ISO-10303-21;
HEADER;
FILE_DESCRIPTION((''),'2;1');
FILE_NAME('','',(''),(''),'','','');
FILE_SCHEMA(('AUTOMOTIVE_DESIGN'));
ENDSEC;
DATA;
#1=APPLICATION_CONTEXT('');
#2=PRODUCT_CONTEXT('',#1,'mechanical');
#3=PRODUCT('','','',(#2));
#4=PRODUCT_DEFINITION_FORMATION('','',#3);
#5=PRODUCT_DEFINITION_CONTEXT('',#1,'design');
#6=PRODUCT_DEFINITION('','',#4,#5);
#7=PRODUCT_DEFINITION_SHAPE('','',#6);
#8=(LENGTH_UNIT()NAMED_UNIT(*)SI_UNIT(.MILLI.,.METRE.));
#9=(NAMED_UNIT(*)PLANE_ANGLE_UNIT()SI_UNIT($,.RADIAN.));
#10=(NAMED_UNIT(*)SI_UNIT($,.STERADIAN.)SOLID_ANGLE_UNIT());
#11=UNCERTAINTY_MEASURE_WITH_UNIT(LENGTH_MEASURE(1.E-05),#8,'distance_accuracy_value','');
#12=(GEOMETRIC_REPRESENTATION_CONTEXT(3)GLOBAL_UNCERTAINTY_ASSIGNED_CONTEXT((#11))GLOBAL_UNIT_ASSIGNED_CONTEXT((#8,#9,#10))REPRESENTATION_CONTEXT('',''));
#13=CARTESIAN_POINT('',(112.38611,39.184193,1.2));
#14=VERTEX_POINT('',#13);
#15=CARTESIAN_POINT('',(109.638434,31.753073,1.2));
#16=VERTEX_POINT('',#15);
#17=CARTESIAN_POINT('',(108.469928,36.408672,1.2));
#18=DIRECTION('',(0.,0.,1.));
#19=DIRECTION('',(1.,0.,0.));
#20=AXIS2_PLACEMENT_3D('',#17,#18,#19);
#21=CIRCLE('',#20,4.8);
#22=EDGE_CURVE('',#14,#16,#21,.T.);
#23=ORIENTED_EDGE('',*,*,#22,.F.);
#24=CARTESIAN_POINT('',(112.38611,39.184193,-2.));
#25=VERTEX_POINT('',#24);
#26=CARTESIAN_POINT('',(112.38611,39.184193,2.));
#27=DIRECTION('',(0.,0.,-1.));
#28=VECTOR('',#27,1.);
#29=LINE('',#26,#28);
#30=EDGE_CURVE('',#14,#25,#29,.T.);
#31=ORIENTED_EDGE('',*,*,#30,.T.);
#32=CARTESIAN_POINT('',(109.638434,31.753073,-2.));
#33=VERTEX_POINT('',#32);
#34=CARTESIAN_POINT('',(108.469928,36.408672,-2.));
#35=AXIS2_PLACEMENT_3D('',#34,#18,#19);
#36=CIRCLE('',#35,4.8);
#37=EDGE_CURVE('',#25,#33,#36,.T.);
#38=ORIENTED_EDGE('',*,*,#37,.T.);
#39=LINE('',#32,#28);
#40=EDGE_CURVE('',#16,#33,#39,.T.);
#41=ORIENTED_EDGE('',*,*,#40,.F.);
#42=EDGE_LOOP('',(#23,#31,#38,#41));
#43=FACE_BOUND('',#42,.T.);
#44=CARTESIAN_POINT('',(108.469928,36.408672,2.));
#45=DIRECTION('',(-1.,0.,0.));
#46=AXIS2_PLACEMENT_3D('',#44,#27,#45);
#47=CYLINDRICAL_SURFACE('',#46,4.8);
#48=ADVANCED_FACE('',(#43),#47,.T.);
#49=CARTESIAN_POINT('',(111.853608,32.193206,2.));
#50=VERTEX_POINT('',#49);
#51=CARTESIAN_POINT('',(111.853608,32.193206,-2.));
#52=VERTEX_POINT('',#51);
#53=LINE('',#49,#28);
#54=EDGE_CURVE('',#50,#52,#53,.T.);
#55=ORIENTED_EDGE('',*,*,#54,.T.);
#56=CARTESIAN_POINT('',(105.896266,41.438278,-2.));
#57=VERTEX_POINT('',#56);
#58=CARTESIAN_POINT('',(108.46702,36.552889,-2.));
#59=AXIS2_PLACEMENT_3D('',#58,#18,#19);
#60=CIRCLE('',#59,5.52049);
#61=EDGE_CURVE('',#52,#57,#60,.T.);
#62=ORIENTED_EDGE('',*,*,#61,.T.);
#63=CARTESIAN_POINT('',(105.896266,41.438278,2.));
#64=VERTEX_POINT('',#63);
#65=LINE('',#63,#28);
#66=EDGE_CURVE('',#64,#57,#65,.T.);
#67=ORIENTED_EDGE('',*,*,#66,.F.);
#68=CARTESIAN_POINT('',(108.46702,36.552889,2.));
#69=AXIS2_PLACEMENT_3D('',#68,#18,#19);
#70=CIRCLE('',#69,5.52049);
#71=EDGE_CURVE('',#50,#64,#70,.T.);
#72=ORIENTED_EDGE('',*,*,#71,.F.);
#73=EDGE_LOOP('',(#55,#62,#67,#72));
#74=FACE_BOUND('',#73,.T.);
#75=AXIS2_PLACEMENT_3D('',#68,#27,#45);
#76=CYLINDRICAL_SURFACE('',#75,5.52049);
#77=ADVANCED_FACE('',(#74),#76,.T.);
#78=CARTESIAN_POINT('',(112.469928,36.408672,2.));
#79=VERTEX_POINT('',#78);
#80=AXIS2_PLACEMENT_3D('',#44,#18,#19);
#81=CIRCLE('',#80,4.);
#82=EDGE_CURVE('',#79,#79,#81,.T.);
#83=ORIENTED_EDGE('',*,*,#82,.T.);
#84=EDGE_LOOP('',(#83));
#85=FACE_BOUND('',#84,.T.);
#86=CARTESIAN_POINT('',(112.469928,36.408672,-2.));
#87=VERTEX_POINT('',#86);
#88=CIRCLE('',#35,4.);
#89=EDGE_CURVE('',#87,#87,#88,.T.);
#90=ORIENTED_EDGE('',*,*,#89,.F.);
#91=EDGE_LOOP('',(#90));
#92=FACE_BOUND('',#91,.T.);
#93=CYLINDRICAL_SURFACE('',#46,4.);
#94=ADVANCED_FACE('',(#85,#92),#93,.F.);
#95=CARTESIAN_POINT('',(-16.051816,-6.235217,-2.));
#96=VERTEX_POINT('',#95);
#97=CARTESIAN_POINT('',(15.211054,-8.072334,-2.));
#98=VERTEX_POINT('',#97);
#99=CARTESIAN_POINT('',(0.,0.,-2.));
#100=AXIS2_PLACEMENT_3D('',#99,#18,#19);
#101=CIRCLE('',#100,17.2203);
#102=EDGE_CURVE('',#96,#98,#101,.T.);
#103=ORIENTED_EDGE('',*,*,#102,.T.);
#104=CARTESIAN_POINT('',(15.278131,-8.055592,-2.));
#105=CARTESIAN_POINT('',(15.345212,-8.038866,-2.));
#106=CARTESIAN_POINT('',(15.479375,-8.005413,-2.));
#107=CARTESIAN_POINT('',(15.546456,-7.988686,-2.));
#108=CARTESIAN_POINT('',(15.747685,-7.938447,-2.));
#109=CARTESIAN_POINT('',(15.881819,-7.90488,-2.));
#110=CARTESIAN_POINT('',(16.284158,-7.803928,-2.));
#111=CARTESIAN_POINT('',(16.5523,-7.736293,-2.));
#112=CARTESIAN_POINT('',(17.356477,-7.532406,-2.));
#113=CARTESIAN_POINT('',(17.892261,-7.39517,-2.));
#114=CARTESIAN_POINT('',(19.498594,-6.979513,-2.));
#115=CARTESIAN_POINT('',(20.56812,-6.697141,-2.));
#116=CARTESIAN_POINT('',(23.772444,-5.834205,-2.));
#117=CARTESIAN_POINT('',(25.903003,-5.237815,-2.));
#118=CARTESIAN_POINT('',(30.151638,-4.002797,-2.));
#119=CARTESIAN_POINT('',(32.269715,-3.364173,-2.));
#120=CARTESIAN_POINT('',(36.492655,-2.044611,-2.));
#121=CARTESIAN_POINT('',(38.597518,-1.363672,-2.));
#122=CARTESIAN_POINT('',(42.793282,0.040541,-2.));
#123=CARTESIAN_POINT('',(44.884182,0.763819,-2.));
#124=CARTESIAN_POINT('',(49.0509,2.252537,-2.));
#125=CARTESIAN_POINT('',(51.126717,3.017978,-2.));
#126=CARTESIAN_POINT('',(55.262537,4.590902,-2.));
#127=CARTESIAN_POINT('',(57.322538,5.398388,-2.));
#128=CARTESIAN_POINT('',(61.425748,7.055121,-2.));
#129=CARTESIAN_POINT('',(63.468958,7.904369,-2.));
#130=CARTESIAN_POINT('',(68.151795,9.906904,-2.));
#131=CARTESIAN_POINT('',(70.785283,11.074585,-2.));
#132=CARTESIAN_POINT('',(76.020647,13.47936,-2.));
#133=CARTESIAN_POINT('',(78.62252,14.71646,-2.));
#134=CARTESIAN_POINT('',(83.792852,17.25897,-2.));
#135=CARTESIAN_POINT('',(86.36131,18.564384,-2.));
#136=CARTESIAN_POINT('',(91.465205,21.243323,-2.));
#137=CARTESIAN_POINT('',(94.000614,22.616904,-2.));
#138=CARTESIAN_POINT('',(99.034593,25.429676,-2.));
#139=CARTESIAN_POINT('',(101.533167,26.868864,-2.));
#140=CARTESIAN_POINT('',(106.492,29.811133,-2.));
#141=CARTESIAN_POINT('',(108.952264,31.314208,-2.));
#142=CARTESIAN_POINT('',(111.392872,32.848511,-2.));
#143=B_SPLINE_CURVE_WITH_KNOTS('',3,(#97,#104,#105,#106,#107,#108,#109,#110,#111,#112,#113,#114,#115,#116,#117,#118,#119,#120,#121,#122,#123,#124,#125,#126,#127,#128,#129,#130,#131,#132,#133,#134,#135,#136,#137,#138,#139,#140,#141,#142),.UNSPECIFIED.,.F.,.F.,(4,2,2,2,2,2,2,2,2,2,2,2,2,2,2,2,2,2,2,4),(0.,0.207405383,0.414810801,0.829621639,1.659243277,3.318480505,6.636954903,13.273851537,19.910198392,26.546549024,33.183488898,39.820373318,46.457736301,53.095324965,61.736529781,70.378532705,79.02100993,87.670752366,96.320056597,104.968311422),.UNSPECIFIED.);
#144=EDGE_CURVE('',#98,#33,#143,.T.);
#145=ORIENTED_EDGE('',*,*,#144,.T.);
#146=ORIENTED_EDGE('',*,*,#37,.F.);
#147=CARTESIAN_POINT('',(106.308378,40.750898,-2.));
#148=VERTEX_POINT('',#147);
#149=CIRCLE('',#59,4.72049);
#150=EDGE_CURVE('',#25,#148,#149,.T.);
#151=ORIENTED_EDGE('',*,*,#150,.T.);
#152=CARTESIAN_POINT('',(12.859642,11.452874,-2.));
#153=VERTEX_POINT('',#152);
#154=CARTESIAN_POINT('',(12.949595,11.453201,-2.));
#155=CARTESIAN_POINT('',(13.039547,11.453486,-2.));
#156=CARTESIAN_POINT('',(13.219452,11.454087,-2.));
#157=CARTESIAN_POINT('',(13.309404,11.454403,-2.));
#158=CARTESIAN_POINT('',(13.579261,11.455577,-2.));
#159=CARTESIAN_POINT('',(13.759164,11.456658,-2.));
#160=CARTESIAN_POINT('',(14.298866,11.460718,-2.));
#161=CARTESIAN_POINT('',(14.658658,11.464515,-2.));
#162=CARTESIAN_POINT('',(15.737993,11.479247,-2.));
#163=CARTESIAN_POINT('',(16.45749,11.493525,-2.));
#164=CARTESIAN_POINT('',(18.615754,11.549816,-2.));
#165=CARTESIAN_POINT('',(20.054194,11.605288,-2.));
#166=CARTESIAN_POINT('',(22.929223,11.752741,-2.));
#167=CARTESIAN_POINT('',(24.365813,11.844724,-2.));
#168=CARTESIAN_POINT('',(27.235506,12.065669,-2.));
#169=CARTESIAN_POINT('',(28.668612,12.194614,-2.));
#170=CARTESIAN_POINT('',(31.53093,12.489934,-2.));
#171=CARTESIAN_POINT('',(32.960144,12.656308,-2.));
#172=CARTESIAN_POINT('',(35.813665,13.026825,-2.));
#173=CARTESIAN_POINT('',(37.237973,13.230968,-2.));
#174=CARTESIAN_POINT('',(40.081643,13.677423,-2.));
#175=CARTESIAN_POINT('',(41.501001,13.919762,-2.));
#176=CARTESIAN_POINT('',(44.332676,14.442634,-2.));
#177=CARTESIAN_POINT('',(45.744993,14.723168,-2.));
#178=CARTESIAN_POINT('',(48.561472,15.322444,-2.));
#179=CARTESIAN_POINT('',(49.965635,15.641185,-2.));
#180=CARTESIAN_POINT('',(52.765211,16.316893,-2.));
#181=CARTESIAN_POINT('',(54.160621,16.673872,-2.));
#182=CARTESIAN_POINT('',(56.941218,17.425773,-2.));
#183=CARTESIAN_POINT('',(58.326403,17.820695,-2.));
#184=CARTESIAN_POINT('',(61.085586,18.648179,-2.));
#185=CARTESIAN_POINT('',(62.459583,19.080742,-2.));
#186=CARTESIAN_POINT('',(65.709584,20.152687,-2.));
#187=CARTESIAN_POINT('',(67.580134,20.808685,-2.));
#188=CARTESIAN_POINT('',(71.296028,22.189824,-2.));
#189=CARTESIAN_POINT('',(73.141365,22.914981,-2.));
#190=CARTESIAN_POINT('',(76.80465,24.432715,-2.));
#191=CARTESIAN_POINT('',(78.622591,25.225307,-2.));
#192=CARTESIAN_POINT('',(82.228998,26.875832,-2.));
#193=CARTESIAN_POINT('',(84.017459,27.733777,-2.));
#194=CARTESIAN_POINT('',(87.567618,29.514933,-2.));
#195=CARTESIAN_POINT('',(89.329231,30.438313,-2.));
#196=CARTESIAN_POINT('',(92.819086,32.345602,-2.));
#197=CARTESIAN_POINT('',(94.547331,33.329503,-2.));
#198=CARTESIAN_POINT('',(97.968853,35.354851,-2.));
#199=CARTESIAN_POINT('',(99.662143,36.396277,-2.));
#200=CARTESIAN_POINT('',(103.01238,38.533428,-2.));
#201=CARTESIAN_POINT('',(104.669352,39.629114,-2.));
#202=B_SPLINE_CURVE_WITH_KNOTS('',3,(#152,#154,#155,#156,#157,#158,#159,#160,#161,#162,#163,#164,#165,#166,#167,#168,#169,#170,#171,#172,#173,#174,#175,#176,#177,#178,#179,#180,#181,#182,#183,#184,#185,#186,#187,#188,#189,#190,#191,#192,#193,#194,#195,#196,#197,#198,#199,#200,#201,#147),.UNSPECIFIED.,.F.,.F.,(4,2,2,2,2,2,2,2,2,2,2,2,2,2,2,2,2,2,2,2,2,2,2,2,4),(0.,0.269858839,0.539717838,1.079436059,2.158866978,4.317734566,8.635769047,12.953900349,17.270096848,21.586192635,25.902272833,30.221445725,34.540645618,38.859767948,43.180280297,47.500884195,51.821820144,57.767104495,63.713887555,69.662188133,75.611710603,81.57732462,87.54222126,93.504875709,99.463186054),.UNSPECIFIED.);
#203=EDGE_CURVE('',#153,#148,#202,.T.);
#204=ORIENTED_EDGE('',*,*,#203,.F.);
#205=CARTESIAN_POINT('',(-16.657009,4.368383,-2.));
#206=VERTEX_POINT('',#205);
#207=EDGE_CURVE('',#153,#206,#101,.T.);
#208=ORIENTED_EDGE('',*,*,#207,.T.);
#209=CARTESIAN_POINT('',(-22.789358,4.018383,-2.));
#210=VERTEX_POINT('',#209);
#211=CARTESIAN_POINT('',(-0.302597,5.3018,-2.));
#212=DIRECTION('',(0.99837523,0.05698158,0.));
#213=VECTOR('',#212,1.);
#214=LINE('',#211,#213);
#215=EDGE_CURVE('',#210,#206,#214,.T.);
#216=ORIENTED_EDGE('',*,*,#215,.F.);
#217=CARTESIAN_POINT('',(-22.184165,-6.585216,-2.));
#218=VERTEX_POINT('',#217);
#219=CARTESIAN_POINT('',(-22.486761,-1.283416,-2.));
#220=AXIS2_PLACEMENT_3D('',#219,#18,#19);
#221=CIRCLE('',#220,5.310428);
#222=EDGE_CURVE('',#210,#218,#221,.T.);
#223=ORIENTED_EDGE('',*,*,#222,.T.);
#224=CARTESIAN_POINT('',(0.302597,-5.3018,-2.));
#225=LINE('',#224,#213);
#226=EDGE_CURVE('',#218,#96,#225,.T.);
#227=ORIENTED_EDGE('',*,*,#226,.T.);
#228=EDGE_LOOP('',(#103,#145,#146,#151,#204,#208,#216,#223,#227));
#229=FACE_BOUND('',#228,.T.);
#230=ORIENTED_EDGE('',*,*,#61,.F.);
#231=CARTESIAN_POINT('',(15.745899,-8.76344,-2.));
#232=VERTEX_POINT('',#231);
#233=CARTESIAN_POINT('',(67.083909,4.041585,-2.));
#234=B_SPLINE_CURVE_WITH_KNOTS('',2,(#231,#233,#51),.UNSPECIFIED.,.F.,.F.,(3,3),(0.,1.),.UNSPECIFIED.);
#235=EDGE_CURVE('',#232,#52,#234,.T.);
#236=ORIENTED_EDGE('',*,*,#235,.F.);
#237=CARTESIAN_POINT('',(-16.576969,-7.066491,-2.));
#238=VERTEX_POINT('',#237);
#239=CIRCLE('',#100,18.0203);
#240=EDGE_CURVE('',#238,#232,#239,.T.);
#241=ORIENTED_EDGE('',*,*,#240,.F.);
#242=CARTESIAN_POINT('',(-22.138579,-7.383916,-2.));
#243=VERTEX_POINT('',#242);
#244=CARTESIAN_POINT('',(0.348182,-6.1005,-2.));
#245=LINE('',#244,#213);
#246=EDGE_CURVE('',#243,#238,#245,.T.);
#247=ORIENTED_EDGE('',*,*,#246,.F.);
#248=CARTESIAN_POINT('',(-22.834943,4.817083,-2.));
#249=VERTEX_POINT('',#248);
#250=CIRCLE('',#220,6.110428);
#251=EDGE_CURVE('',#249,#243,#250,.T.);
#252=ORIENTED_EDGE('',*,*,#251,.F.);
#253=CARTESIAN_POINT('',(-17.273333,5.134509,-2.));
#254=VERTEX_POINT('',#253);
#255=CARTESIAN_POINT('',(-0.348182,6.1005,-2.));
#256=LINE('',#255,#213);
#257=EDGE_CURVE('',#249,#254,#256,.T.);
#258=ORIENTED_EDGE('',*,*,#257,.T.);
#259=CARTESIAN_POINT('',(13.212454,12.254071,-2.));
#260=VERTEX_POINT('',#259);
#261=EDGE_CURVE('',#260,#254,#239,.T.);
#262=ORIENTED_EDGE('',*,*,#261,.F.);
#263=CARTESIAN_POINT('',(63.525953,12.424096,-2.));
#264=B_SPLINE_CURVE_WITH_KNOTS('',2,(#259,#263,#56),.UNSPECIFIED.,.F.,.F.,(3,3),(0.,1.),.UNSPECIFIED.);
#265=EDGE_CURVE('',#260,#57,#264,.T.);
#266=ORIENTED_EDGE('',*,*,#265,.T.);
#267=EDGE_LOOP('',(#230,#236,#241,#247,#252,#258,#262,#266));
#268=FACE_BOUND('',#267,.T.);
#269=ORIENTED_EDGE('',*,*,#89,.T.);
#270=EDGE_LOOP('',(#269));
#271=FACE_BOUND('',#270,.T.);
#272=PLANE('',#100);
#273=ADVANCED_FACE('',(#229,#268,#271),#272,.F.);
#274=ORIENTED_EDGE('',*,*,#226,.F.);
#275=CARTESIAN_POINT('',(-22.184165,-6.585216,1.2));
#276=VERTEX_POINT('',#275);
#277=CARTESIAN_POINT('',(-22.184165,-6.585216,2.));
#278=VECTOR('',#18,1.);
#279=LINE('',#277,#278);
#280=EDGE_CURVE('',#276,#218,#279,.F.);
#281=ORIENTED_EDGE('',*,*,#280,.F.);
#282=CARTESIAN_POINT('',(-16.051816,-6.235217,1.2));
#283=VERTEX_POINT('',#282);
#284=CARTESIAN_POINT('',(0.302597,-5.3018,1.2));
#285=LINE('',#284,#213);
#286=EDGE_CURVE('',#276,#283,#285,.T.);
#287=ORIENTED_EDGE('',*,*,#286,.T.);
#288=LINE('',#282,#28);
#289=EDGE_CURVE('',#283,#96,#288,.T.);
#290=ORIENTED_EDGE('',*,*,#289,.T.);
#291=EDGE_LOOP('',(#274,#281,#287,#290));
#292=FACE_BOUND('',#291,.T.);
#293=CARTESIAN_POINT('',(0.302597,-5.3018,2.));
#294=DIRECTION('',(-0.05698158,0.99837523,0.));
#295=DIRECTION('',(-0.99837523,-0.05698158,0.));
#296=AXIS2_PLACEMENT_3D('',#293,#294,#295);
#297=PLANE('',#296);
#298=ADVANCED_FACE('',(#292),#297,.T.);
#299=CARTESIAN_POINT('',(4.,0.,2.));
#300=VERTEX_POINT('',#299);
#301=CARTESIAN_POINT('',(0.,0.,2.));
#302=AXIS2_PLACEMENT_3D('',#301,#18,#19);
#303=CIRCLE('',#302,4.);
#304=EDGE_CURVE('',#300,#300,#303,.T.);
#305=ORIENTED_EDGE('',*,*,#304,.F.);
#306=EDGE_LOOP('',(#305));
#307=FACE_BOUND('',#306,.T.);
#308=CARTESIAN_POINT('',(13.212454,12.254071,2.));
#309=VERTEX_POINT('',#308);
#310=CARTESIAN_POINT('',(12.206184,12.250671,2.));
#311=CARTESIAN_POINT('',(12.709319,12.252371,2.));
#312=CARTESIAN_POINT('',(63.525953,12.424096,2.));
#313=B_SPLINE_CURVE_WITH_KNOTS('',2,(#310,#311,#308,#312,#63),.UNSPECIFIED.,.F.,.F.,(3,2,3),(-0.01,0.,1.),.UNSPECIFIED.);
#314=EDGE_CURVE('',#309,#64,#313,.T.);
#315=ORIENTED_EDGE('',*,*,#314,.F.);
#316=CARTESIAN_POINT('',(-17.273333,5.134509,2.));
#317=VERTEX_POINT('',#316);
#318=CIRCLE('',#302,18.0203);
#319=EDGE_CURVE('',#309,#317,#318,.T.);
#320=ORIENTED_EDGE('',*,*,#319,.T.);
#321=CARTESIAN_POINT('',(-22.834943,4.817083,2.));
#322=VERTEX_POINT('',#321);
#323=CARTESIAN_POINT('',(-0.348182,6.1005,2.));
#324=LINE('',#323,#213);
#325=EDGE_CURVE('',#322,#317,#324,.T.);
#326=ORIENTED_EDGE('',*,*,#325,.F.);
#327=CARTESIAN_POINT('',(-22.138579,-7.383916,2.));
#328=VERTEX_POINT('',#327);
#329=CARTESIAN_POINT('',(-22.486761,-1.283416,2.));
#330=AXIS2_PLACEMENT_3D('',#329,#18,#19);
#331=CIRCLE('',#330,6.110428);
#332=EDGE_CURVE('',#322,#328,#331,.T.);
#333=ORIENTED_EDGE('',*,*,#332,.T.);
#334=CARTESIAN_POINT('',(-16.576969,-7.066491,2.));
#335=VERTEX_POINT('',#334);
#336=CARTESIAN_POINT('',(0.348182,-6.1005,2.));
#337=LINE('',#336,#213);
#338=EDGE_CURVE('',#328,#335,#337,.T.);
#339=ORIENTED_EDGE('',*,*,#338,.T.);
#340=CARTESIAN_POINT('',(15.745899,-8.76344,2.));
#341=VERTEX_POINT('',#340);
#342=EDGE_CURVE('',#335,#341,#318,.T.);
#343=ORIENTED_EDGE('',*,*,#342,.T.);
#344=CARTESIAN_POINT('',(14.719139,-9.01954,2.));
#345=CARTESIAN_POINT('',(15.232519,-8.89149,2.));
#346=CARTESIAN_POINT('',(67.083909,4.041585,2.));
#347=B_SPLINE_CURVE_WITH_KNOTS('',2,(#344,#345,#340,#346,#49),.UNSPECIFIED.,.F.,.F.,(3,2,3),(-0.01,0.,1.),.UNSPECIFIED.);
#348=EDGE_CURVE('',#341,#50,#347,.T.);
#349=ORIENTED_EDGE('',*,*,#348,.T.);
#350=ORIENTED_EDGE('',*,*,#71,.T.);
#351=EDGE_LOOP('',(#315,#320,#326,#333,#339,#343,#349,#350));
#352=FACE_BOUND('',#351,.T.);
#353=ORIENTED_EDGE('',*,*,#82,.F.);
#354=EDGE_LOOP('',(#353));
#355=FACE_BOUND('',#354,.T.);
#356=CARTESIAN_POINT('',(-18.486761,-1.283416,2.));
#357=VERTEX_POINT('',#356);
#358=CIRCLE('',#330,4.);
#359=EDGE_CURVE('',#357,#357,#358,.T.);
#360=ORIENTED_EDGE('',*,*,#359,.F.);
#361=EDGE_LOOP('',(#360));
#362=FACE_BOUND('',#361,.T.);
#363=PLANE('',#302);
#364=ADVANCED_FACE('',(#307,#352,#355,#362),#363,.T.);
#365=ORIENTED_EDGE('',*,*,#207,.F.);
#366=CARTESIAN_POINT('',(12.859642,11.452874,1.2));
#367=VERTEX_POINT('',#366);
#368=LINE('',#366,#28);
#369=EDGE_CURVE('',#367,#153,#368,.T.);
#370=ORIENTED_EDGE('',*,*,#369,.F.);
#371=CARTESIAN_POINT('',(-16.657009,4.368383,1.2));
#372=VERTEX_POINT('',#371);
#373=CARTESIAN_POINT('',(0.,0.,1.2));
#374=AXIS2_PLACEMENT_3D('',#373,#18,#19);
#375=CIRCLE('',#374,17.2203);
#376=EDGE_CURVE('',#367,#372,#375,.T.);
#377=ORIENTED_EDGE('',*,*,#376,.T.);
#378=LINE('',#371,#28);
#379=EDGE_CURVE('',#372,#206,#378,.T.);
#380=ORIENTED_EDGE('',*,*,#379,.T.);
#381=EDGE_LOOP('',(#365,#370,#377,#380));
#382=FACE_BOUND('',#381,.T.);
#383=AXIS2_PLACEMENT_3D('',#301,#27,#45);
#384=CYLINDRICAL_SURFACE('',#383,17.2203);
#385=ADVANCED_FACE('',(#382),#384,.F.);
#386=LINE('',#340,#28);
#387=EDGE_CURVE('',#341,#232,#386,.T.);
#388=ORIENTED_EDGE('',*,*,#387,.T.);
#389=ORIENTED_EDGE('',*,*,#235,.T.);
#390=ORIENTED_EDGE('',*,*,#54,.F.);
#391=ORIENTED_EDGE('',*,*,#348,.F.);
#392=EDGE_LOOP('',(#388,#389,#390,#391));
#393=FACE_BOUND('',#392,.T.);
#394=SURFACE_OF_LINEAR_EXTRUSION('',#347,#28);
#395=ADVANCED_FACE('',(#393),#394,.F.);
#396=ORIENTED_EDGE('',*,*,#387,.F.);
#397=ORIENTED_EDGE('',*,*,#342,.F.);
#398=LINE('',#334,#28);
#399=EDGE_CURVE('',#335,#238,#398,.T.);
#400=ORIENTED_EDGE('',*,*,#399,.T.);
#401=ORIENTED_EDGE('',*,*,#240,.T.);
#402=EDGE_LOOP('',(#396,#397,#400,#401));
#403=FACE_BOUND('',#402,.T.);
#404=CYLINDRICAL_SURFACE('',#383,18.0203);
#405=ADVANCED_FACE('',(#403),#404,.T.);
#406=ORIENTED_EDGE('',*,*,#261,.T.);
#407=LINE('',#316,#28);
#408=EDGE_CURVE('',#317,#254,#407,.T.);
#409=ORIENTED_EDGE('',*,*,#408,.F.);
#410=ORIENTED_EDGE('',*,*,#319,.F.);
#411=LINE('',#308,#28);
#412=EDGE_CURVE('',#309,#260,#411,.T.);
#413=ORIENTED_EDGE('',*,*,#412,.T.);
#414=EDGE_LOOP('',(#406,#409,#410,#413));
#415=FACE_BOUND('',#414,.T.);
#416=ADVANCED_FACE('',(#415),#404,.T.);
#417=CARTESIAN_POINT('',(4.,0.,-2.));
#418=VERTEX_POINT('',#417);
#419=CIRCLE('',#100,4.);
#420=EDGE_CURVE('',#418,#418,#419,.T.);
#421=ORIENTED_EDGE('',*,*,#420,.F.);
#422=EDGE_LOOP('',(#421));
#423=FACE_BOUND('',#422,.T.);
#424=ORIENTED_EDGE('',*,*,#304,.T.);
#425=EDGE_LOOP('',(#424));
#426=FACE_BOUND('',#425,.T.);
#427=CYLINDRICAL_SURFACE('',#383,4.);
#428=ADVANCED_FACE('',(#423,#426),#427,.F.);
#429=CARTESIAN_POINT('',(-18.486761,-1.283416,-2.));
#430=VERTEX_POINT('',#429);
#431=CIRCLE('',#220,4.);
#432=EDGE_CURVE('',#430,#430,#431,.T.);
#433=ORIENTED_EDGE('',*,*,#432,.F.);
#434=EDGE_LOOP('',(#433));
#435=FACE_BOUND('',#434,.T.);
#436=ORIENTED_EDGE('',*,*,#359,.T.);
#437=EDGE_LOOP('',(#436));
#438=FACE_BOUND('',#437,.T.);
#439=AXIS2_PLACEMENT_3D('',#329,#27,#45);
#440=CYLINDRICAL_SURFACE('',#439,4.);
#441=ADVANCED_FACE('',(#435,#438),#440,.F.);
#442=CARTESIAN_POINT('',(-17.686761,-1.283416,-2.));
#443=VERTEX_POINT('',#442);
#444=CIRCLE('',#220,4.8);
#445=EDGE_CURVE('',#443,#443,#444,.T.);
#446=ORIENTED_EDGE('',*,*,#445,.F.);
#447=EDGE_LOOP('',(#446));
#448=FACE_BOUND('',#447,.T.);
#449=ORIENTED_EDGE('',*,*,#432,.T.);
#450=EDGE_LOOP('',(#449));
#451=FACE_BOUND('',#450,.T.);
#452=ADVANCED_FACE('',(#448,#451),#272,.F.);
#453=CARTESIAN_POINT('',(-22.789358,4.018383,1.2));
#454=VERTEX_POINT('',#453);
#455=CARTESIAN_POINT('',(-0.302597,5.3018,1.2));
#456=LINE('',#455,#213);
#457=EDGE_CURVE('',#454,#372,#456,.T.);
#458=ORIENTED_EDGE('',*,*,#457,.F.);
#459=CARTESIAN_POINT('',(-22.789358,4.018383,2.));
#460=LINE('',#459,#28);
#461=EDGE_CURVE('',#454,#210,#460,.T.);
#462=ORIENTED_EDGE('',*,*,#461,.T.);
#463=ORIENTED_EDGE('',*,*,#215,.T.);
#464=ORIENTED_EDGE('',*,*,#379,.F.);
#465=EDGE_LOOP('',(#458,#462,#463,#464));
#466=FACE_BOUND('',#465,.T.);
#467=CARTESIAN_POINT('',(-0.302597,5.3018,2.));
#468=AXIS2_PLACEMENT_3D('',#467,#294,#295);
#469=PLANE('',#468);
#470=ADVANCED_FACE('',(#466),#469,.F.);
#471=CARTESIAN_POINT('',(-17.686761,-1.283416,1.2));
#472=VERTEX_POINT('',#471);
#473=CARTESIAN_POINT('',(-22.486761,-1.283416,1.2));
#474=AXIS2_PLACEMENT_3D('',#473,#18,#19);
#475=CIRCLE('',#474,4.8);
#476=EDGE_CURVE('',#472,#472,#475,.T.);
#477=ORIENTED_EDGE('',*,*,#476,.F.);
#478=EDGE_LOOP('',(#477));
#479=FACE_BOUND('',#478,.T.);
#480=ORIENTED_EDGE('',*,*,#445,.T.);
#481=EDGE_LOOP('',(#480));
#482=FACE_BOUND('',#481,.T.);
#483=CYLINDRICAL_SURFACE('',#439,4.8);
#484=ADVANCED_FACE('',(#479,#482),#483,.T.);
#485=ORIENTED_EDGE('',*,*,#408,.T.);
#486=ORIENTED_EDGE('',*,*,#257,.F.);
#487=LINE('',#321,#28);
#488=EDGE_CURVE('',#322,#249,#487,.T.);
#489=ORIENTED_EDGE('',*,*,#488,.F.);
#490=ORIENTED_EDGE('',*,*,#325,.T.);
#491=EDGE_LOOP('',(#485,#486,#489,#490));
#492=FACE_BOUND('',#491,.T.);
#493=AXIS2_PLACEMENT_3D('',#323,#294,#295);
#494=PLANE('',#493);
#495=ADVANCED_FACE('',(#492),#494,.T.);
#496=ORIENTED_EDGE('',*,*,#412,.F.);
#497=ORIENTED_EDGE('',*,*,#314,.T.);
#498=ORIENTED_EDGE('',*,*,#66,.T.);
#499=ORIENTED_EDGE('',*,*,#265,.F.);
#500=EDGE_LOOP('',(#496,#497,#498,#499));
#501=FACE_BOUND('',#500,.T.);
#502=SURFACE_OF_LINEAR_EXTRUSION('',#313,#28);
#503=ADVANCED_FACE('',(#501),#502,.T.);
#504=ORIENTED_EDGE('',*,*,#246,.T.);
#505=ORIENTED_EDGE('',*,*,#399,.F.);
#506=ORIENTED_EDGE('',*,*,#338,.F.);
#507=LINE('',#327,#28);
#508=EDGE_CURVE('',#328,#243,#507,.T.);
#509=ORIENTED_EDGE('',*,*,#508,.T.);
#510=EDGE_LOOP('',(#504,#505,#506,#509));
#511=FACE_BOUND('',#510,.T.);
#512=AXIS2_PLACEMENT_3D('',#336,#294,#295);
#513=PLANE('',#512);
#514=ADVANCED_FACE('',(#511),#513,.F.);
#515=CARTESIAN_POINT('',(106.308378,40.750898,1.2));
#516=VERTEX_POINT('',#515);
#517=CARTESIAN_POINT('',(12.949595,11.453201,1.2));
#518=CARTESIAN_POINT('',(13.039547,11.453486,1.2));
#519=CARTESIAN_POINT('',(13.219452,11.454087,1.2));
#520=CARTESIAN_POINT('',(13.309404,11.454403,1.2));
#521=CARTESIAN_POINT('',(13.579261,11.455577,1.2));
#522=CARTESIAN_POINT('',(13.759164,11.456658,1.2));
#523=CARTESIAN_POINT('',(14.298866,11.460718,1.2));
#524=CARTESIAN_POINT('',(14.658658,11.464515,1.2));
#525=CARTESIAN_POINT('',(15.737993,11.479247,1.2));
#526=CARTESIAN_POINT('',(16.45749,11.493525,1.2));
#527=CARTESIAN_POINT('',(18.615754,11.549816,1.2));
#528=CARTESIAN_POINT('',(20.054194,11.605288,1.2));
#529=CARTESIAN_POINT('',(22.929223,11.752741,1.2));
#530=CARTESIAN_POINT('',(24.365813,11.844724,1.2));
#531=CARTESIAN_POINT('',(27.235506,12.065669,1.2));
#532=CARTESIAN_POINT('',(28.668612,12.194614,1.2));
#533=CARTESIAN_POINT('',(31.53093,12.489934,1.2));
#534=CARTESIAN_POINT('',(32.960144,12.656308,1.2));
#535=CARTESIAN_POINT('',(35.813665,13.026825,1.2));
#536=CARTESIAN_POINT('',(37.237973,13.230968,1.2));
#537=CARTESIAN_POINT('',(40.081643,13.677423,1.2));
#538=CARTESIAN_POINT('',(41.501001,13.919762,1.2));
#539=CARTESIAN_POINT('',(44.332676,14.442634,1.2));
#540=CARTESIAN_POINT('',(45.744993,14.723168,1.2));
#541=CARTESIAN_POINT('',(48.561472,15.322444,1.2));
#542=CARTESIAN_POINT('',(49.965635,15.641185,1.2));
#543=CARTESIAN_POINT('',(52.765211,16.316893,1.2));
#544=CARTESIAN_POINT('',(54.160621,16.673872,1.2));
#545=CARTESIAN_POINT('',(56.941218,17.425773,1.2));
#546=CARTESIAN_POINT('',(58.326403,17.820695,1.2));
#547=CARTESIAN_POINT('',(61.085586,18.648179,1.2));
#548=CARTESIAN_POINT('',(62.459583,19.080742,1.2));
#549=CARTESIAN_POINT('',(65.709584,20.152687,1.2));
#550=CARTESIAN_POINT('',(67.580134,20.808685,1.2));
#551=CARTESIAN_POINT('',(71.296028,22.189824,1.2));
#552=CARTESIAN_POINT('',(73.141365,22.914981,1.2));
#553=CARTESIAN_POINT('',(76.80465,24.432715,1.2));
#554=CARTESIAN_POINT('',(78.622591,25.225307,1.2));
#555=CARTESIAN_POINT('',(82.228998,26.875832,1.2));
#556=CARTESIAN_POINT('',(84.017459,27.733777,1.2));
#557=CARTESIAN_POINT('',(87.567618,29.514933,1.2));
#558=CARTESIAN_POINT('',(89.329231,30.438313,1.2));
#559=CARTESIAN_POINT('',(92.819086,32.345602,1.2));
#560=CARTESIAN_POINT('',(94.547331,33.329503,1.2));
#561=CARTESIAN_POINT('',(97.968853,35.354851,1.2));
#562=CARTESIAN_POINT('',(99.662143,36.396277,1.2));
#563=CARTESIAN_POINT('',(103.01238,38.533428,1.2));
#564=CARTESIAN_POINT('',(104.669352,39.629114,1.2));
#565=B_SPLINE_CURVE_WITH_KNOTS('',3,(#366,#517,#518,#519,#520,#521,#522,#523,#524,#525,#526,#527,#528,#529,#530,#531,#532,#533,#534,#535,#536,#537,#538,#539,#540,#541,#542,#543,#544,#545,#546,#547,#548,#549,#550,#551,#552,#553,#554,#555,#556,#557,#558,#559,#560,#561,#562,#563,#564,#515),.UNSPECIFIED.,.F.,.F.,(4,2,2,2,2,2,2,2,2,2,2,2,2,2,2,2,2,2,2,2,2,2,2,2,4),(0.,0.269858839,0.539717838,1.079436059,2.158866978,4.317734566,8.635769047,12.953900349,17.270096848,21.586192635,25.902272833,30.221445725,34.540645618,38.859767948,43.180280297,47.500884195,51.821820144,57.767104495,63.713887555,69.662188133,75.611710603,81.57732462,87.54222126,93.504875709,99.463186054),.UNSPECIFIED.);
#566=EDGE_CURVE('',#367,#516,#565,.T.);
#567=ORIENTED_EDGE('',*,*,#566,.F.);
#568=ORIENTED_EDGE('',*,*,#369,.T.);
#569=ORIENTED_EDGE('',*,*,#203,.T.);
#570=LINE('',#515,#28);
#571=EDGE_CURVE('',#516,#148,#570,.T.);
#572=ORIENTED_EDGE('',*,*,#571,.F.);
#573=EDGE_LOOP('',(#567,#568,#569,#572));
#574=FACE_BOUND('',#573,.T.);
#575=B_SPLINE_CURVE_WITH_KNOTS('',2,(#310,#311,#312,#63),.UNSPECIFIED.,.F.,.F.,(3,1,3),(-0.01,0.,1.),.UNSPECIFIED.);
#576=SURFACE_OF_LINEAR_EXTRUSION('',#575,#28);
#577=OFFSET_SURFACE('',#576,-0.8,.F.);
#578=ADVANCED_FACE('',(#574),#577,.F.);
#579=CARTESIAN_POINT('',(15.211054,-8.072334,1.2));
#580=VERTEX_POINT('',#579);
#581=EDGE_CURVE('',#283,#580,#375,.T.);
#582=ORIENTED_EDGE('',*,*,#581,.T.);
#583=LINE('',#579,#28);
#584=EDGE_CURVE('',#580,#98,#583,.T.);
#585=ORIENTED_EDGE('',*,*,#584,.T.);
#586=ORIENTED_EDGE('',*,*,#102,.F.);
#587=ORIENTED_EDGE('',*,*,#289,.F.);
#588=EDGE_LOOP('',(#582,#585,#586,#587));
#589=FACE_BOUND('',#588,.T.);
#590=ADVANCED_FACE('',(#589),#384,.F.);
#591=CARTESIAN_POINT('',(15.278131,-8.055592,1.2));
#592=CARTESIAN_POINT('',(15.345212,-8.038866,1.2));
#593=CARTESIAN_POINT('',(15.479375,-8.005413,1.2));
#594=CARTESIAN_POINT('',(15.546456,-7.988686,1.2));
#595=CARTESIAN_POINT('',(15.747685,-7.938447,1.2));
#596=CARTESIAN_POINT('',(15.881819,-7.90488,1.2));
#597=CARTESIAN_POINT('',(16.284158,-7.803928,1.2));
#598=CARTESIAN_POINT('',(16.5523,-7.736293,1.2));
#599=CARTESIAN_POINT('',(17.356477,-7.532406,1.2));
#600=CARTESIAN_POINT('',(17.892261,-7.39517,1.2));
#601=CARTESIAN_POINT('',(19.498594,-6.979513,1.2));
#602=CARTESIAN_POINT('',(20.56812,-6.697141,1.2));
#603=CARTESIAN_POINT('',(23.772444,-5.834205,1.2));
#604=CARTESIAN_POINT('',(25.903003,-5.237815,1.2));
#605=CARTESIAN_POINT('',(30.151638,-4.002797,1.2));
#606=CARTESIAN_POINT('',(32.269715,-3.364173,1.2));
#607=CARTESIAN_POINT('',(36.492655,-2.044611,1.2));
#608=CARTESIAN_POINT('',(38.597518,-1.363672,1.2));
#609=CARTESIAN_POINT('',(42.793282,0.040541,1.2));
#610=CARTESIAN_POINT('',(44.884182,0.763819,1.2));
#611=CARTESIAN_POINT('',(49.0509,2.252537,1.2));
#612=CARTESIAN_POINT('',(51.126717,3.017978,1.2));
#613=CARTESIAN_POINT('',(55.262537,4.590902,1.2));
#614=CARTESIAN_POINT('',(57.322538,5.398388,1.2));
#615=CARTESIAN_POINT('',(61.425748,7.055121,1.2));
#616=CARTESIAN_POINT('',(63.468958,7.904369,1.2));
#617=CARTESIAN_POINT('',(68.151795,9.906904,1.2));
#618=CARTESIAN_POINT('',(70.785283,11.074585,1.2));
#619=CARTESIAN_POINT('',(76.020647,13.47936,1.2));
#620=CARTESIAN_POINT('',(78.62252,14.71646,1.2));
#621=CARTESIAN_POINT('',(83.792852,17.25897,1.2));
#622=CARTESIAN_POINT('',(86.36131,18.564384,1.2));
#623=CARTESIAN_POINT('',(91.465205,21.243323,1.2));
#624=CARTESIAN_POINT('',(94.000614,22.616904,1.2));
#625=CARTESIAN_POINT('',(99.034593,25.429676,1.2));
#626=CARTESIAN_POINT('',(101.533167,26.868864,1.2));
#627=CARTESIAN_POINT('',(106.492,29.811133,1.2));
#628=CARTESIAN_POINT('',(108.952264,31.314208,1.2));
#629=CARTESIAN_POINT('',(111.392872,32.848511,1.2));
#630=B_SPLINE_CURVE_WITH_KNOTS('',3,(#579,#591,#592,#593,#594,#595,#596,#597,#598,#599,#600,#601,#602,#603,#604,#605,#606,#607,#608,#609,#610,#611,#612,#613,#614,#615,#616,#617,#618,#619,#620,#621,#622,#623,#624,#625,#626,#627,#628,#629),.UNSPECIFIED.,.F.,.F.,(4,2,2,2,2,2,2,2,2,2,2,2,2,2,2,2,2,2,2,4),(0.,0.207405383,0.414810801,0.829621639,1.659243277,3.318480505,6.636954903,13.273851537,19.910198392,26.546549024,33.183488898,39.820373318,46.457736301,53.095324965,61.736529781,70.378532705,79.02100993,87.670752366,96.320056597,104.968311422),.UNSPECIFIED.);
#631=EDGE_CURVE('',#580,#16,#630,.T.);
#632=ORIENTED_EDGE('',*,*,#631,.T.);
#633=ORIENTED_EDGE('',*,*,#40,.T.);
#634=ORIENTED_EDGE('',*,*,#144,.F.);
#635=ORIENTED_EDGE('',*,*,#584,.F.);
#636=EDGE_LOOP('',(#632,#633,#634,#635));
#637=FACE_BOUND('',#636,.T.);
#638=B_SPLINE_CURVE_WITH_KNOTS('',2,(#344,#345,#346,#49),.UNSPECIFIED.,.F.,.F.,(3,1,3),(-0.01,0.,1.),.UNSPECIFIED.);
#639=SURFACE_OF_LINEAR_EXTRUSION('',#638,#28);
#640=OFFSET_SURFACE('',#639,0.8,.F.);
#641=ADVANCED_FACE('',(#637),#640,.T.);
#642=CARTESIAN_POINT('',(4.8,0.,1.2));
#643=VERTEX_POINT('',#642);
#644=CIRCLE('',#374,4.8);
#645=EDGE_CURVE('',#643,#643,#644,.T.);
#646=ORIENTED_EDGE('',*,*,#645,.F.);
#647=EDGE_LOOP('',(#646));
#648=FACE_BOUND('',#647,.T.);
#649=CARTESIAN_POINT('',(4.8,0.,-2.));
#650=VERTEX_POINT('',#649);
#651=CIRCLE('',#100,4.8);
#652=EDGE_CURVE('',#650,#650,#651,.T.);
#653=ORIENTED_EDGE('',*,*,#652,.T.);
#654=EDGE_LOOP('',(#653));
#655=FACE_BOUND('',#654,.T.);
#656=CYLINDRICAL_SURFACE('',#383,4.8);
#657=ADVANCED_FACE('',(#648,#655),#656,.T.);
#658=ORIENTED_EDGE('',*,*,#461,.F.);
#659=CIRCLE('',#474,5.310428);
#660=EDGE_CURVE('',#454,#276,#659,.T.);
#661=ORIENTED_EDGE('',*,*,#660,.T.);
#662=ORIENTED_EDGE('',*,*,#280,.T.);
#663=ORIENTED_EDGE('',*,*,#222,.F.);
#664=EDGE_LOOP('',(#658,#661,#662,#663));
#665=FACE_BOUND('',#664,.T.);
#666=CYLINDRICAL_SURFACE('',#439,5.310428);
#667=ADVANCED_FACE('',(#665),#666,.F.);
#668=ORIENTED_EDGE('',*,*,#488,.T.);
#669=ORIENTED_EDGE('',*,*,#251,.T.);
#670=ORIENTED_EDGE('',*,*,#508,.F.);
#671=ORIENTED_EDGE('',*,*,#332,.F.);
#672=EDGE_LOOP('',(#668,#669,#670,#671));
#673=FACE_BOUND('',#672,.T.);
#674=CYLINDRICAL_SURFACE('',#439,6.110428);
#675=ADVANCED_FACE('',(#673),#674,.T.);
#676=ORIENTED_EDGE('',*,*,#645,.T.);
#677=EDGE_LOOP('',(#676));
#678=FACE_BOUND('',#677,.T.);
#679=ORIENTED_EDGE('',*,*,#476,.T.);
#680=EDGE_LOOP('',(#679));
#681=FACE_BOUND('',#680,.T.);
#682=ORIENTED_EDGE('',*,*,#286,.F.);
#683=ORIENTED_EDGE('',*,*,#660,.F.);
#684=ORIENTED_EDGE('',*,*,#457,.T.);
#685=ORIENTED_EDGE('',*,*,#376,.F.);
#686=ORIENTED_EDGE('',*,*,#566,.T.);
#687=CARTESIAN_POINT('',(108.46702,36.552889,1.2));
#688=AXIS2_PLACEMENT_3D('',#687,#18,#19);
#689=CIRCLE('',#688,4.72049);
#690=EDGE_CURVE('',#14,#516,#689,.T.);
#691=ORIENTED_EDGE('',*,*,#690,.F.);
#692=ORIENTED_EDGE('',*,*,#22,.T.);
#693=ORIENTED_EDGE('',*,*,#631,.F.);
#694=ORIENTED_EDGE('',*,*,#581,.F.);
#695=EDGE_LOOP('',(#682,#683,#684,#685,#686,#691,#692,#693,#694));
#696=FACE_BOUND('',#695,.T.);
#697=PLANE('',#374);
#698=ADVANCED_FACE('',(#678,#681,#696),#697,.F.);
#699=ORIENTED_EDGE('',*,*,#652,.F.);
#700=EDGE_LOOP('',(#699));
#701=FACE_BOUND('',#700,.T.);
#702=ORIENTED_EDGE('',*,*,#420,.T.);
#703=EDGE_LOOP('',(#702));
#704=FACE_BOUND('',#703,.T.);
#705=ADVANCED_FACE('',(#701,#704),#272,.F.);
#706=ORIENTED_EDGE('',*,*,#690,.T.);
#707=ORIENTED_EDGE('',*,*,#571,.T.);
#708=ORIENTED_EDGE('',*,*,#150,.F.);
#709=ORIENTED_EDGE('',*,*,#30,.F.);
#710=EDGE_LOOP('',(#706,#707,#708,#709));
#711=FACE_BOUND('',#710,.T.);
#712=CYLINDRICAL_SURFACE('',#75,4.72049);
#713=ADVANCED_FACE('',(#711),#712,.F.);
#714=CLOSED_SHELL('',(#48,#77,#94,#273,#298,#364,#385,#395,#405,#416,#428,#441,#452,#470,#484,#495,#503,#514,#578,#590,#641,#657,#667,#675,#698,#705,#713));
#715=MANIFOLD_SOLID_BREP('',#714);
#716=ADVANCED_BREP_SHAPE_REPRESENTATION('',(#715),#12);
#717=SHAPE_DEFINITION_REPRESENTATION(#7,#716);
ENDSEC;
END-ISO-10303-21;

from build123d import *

# Parameters (mm, degrees)
SKETCH1_R           = 4
BOSS_EXTRUDE1_DEPTH = 2
SHELL1_START        = -2
SHELL1_OUTLINE_R    = 4.8
SHELL1_DEPTH        = 3.2


# Read off the part's stored shape, not the designer's step: Shell1
with BuildPart() as part:
    # Sketch1 → Boss-Extrude1 (new, symmetric)
    with BuildSketch(Plane.XY):
        with BuildLine():
            Line((-17.273333042, 5.134508518), (-22.834943086, 4.817083449))
            ThreePointArc((-22.834943086, 4.817083449), (-28.587261134, -1.63159827), (-22.138579415, -7.383916318))
            Line((-22.138579415, -7.383916318), (-16.576969371, -7.066491249))
            ThreePointArc((-16.576969371, -7.066491249), (-0.944763396, -17.995517059), (15.7458991, -8.7634396))
            add(Edge.make_bspline(
                [(15.7458991, -8.7634396), (67.083909385, 4.041585312), (111.853607553, 32.193205755)],
                knots=[0, 0, 0, 1, 1, 1], degree=2))
            ThreePointArc((111.853607553, 32.193205755), (113.10751986, 39.543134952), (105.896265572, 41.438277917))
            add(Edge.make_bspline(
                [(105.896265572, 41.438277917), (63.525953211, 12.424095607), (13.212454281, 12.254071322)],
                knots=[0.987896241, 0.987896241, 0.987896241, 1.987896241, 1.987896241, 1.987896241], degree=2))
            ThreePointArc((13.212454281, 12.254071322), (-4.098137102, 17.548119112), (-17.273333042, 5.134508518))
        make_face()
        with Locations((-22.486761251, -1.283416434)):
            Circle(SKETCH1_R, mode=Mode.SUBTRACT)
        Circle(SKETCH1_R, mode=Mode.SUBTRACT)
        with Locations((108.469927907, 36.408671583)):
            Circle(SKETCH1_R, mode=Mode.SUBTRACT)
    extrude(amount=BOSS_EXTRUDE1_DEPTH, both=True)

    # Shell1 outline → Shell1 (cut)
    with BuildSketch(Plane.XY.offset(SHELL1_START)):
        with BuildLine():
            ThreePointArc((-16.051816298, -6.235216567), (-1.010183418, -17.190644594), (15.211053739, -8.072334002))
            add(Edge.make_bspline(
                [(15.211053739, -8.072334002), (15.222385933, -8.06950746), (15.233718127, -8.066680918), (15.245050322, -8.063854377), (15.256382516, -8.061027835), (15.26771471, -8.058201293), (15.279046904, -8.055374751), (15.290379098, -8.05254821), (15.301711293, -8.049721668), (15.313043487, -8.046895126), (15.324375681, -8.044068584), (15.354121011, -8.036649331), (15.372534147, -8.03205662), (15.390947283, -8.027463909), (15.409360418, -8.022871197), (15.427773554, -8.018278486), (15.44618669, -8.013685775), (15.464599826, -8.009093063), (15.483012962, -8.004500352), (15.501426097, -7.999907641), (15.519839233, -7.995314929), (15.540554011, -7.990148129), (15.542858699, -7.989573289), (15.545136117, -7.989005183), (15.547530208, -7.988408212), (15.549617399, -7.987887312), (15.552237019, -7.987234194), (15.554249413, -7.98673216), (15.556693958, -7.986122386), (15.558944951, -7.985560901), (15.5612476, -7.984986493), (15.56583998, -7.983840868), (15.568136163, -7.983268038), (15.570432338, -7.982695192), (15.572728507, -7.982122328), (15.575024668, -7.981549448), (15.577320821, -7.980976551), (15.579616968, -7.980403637), (15.581913107, -7.979830706), (15.584209239, -7.979257758), (15.586505364, -7.978684793), (15.593393716, -7.976965848), (15.597985921, -7.975819817), (15.602578098, -7.974673718), (15.607170246, -7.973527552), (15.611762364, -7.972381317), (15.616354454, -7.971235016), (15.620946514, -7.970088646), (15.625538546, -7.968942209), (15.630130548, -7.967795704), (15.634722521, -7.966649131), (15.648498354, -7.96320921), (15.657682126, -7.960915659), (15.666865782, -7.958621837), (15.676049322, -7.956327744), (15.685232745, -7.954033381), (15.694416052, -7.951738746), (15.703599244, -7.949443841), (15.712782318, -7.947148666), (15.721965277, -7.944853219), (15.731148119, -7.942557502), (15.77706175, -7.931077562), (15.813790795, -7.921889279), (15.85051798, -7.912696664), (15.887243306, -7.903499717), (15.923966772, -7.894298439), (15.960688378, -7.885092829), (15.997408124, -7.875882887), (16.034126012, -7.866668613), (16.070842039, -7.857450008), (16.107556207, -7.848227071), (16.291117748, -7.802090727), (16.437937227, -7.765112345), (16.584726952, -7.728064656), (16.731486924, -7.690947659), (16.878217144, -7.653761355), (17.02491761, -7.616505744), (17.171588325, -7.579180826), (17.318229287, -7.5417866), (17.464840497, -7.504323068), (17.611421956, -7.466790228), (18.05107708, -7.353983788), (18.34406149, -7.278502266), (18.636926899, -7.202743515), (18.929673307, -7.126707537), (19.222300717, -7.050394331), (19.514809132, -6.973803896), (19.807198553, -6.896936234), (20.099468984, -6.819791344), (20.391620426, -6.742369227), (20.683652882, -6.664669882), (21.559393298, -6.430740165), (22.142744307, -6.273678112), (22.725619399, -6.11550715), (23.308018593, -5.956227279), (23.889941907, -5.795838499), (24.471389362, -5.63434081), (25.052360976, -5.471734213), (25.632856767, -5.308018707), (26.212876755, -5.143194292), (26.792420958, -4.977260969), (28.529626269, -4.476134272), (29.68586008, -4.137614183), (30.84019098, -3.794658457), (31.992619122, -3.447267078), (33.143144661, -3.095440033), (34.29176775, -2.739177308), (35.438488542, -2.378478888), (36.583307191, -2.01334476), (37.726223851, -1.64377491), (38.867238673, -1.269769323), (42.284578093, -0.134445311), (44.55519768, 0.640180196), (46.818211791, 1.432548876), (49.073621643, 2.242661072), (51.32142845, 3.070517125), (53.561633431, 3.916117378), (55.794237801, 4.779462172), (58.019242777, 5.660551849), (60.236649574, 6.559386751), (62.44645941, 7.47596722), (68.878655155, 10.20493448), (73.080612538, 12.065048094), (77.254554243, 13.99063813), (81.400488497, 15.981708647), (85.518423161, 18.038264067), (89.608365726, 20.16030918), (93.67032332, 22.347849143), (97.704302702, 24.600889477), (101.710310261, 26.919436071), (105.688352025, 29.30349518), (109.638433649, 31.753073424)],
                knots=[-0.003323428, -0.003323428, -0.003323428, -0.003323428, -0.003323428, -0.003323428, -0.003323428, -0.003323428, -0.003323428, -0.003323428, -0.003323428, -0.003323428, -0.002109375, -0.002109375, -0.002109375, -0.002109375, -0.002109375, -0.002109375, -0.002109375, -0.002109375, -0.002109375, -0.002109375, -0.000136719, -0.000136719, -0.000136719, -0.000136719, -0.000136719, -0.000136719, -0.000136719, -0.000136719, -0.000136719, -0.000136719, 0.000109863, 0.000109863, 0.000109863, 0.000109863, 0.000109863, 0.000109863, 0.000109863, 0.000109863, 0.000109863, 0.000109863, 0.000356445, 0.000356445, 0.000356445, 0.000356445, 0.000356445, 0.000356445, 0.000356445, 0.000356445, 0.000356445, 0.000356445, 0.000849609, 0.000849609, 0.000849609, 0.000849609, 0.000849609, 0.000849609, 0.000849609, 0.000849609, 0.000849609, 0.000849609, 0.001835937, 0.001835937, 0.001835937, 0.001835937, 0.001835937, 0.001835937, 0.001835937, 0.001835937, 0.001835937, 0.001835937, 0.00578125, 0.00578125, 0.00578125, 0.00578125, 0.00578125, 0.00578125, 0.00578125, 0.00578125, 0.00578125, 0.00578125, 0.0215625, 0.0215625, 0.0215625, 0.0215625, 0.0215625, 0.0215625, 0.0215625, 0.0215625, 0.0215625, 0.0215625, 0.053125, 0.053125, 0.053125, 0.053125, 0.053125, 0.053125, 0.053125, 0.053125, 0.053125, 0.053125, 0.11625, 0.11625, 0.11625, 0.11625, 0.11625, 0.11625, 0.11625, 0.11625, 0.11625, 0.11625, 0.2425, 0.2425, 0.2425, 0.2425, 0.2425, 0.2425, 0.2425, 0.2425, 0.2425, 0.2425, 0.495, 0.495, 0.495, 0.495, 0.495, 0.495, 0.495, 0.495, 0.495, 0.495, 0.979998426, 0.979998426, 0.979998426, 0.979998426, 0.979998426, 0.979998426, 0.979998426, 0.979998426, 0.979998426, 0.979998426, 0.979998426, 0.979998426], degree=11))
            ThreePointArc((109.638433649, 31.753073424), (103.967828672, 38.073334454), (112.386109536, 39.184193417))
            ThreePointArc((112.386109536, 39.184193417), (109.645338699, 41.123948782), (106.30837764, 40.75089845))
            add(Edge.make_bspline(
                [(12.859642213, 11.452874497), (12.875559482, 11.452928286), (12.89147675, 11.452982075), (12.907394019, 11.453035864), (12.923311287, 11.453089654), (12.939228556, 11.453143443), (12.955145825, 11.453197232), (12.971063093, 11.453251021), (12.986980362, 11.45330481), (13.024953461, 11.453433133), (13.047009292, 11.453507666), (13.069065122, 11.453582199), (13.091120953, 11.453656732), (13.113176784, 11.453731266), (13.135232614, 11.453805799), (13.157288445, 11.453880332), (13.179344276, 11.453954865), (13.202778596, 11.454034057), (13.204157085, 11.454038715), (13.205535575, 11.454043373), (13.206914064, 11.454048032), (13.208292554, 11.45405269), (13.209671043, 11.454057348), (13.211049532, 11.454062007), (13.212428022, 11.454066665), (13.215185001, 11.454075982), (13.216554492, 11.454080606), (13.217987164, 11.45408545), (13.219302057, 11.454089949), (13.220750975, 11.45409485), (13.222097481, 11.454099473), (13.223496126, 11.454104254), (13.224878499, 11.454109002), (13.229032762, 11.454123302), (13.231802257, 11.454132885), (13.234571739, 11.454142516), (13.237341208, 11.454152197), (13.240110663, 11.454161926), (13.242880105, 11.454171704), (13.245649534, 11.454181531), (13.248418949, 11.454191408), (13.256727156, 11.454221183), (13.262265907, 11.454241229), (13.267804605, 11.454261471), (13.273343249, 11.454281908), (13.278881841, 11.454302541), (13.284420379, 11.45432337), (13.289958865, 11.454344395), (13.295497296, 11.454365616), (13.312112433, 11.454429865), (13.323188978, 11.45447348), (13.33426531, 11.454517879), (13.345341429, 11.45456306), (13.356417336, 11.454609025), (13.36749303, 11.454655773), (13.378568511, 11.454703304), (13.389643779, 11.454751618), (13.445019058, 11.454997102), (13.489315877, 11.455206018), (13.533609292, 11.455427463), (13.577899303, 11.455661437), (13.62218591, 11.455907939), (13.666469113, 11.45616697), (13.710748913, 11.456438529), (13.755025308, 11.456722618), (13.976390262, 11.458205705), (14.153427758, 11.459592636), (14.330410785, 11.461180031), (14.50733934, 11.46296789), (14.684213418, 11.464956217), (14.861033018, 11.467145013), (15.037798135, 11.469534279), (15.214508768, 11.472124018), (15.7444772, 11.480494658), (16.097571535, 11.486876983), (16.450447892, 11.494061221), (16.803106245, 11.502047384), (17.155546567, 11.510835488), (17.507768833, 11.520425545), (17.859773016, 11.53081757), (18.211559091, 11.542011578), (19.266262913, 11.577999586), (19.968526266, 11.605199584), (20.669916866, 11.635607671), (21.370434487, 11.669223941), (22.070078905, 11.706048488), (22.768849895, 11.746081409), (23.466747231, 11.789322799), (24.163770688, 11.835772751), (26.252218749, 11.984748583), (27.641021145, 12.096900641), (29.026325206, 12.221887985), (30.408128907, 12.359711064), (31.786430221, 12.510370327), (33.161227125, 12.673866223), (34.532517592, 12.850199202), (35.900299598, 13.039369712), (39.993114157, 13.645395185), (42.707615071, 14.100763008), (45.408056156, 14.607483418), (48.094419774, 15.16555678), (50.76668835, 15.774982078), (53.424844378, 16.435756921), (56.068870417, 17.147877537), (58.698749092, 17.911338773), (66.541035798, 20.354212331), (71.711057703, 22.187245864), (76.824392267, 24.225184187), (81.880917363, 26.467954887), (86.880527203, 28.915468978), (91.823134257, 31.567626244), (96.708671175, 34.424320569), (101.53709271, 37.485445273), (106.30837764, 40.75089845)],
                knots=[-0.003533003, -0.003533003, -0.003533003, -0.003533003, -0.003533003, -0.003533003, -0.003533003, -0.003533003, -0.003533003, -0.003533003, -0.002109375, -0.002109375, -0.002109375, -0.002109375, -0.002109375, -0.002109375, -0.002109375, -0.002109375, -0.000136719, -0.000136719, -0.000136719, -0.000136719, -0.000136719, -0.000136719, -0.000136719, -0.000136719, -1.3428e-05, -1.3428e-05, -1.3428e-05, -1.3428e-05, -1.3428e-05, -1.3428e-05, -1.3428e-05, -1.3428e-05, 0.000109863, 0.000109863, 0.000109863, 0.000109863, 0.000109863, 0.000109863, 0.000109863, 0.000109863, 0.000356445, 0.000356445, 0.000356445, 0.000356445, 0.000356445, 0.000356445, 0.000356445, 0.000356445, 0.000849609, 0.000849609, 0.000849609, 0.000849609, 0.000849609, 0.000849609, 0.000849609, 0.000849609, 0.001835937, 0.001835937, 0.001835937, 0.001835937, 0.001835937, 0.001835937, 0.001835937, 0.001835937, 0.00578125, 0.00578125, 0.00578125, 0.00578125, 0.00578125, 0.00578125, 0.00578125, 0.00578125, 0.0215625, 0.0215625, 0.0215625, 0.0215625, 0.0215625, 0.0215625, 0.0215625, 0.0215625, 0.053125, 0.053125, 0.053125, 0.053125, 0.053125, 0.053125, 0.053125, 0.053125, 0.11625, 0.11625, 0.11625, 0.11625, 0.11625, 0.11625, 0.11625, 0.11625, 0.2425, 0.2425, 0.2425, 0.2425, 0.2425, 0.2425, 0.2425, 0.2425, 0.495, 0.495, 0.495, 0.495, 0.495, 0.495, 0.495, 0.495, 0.999531309, 0.999531309, 0.999531309, 0.999531309, 0.999531309, 0.999531309, 0.999531309, 0.999531309, 0.999531309, 0.999531309], degree=9))
            ThreePointArc((12.859642213, 11.452874497), (-4.019017915, 16.744737295), (-16.657009441, 4.368382832))
            Line((-16.657009441, 4.368382832), (-22.789357823, 4.018383265))
            ThreePointArc((-22.789357823, 4.018383265), (-27.78856095, -1.586013006), (-22.184164679, -6.585216134))
            Line((-22.184164679, -6.585216134), (-16.051816298, -6.235216567))
        make_face()
        with Locations((-22.486761251, -1.283416434)):
            Circle(SHELL1_OUTLINE_R, mode=Mode.SUBTRACT)
        Circle(SHELL1_OUTLINE_R, mode=Mode.SUBTRACT)
    extrude(amount=SHELL1_DEPTH, mode=Mode.SUBTRACT)


solid = part.part
